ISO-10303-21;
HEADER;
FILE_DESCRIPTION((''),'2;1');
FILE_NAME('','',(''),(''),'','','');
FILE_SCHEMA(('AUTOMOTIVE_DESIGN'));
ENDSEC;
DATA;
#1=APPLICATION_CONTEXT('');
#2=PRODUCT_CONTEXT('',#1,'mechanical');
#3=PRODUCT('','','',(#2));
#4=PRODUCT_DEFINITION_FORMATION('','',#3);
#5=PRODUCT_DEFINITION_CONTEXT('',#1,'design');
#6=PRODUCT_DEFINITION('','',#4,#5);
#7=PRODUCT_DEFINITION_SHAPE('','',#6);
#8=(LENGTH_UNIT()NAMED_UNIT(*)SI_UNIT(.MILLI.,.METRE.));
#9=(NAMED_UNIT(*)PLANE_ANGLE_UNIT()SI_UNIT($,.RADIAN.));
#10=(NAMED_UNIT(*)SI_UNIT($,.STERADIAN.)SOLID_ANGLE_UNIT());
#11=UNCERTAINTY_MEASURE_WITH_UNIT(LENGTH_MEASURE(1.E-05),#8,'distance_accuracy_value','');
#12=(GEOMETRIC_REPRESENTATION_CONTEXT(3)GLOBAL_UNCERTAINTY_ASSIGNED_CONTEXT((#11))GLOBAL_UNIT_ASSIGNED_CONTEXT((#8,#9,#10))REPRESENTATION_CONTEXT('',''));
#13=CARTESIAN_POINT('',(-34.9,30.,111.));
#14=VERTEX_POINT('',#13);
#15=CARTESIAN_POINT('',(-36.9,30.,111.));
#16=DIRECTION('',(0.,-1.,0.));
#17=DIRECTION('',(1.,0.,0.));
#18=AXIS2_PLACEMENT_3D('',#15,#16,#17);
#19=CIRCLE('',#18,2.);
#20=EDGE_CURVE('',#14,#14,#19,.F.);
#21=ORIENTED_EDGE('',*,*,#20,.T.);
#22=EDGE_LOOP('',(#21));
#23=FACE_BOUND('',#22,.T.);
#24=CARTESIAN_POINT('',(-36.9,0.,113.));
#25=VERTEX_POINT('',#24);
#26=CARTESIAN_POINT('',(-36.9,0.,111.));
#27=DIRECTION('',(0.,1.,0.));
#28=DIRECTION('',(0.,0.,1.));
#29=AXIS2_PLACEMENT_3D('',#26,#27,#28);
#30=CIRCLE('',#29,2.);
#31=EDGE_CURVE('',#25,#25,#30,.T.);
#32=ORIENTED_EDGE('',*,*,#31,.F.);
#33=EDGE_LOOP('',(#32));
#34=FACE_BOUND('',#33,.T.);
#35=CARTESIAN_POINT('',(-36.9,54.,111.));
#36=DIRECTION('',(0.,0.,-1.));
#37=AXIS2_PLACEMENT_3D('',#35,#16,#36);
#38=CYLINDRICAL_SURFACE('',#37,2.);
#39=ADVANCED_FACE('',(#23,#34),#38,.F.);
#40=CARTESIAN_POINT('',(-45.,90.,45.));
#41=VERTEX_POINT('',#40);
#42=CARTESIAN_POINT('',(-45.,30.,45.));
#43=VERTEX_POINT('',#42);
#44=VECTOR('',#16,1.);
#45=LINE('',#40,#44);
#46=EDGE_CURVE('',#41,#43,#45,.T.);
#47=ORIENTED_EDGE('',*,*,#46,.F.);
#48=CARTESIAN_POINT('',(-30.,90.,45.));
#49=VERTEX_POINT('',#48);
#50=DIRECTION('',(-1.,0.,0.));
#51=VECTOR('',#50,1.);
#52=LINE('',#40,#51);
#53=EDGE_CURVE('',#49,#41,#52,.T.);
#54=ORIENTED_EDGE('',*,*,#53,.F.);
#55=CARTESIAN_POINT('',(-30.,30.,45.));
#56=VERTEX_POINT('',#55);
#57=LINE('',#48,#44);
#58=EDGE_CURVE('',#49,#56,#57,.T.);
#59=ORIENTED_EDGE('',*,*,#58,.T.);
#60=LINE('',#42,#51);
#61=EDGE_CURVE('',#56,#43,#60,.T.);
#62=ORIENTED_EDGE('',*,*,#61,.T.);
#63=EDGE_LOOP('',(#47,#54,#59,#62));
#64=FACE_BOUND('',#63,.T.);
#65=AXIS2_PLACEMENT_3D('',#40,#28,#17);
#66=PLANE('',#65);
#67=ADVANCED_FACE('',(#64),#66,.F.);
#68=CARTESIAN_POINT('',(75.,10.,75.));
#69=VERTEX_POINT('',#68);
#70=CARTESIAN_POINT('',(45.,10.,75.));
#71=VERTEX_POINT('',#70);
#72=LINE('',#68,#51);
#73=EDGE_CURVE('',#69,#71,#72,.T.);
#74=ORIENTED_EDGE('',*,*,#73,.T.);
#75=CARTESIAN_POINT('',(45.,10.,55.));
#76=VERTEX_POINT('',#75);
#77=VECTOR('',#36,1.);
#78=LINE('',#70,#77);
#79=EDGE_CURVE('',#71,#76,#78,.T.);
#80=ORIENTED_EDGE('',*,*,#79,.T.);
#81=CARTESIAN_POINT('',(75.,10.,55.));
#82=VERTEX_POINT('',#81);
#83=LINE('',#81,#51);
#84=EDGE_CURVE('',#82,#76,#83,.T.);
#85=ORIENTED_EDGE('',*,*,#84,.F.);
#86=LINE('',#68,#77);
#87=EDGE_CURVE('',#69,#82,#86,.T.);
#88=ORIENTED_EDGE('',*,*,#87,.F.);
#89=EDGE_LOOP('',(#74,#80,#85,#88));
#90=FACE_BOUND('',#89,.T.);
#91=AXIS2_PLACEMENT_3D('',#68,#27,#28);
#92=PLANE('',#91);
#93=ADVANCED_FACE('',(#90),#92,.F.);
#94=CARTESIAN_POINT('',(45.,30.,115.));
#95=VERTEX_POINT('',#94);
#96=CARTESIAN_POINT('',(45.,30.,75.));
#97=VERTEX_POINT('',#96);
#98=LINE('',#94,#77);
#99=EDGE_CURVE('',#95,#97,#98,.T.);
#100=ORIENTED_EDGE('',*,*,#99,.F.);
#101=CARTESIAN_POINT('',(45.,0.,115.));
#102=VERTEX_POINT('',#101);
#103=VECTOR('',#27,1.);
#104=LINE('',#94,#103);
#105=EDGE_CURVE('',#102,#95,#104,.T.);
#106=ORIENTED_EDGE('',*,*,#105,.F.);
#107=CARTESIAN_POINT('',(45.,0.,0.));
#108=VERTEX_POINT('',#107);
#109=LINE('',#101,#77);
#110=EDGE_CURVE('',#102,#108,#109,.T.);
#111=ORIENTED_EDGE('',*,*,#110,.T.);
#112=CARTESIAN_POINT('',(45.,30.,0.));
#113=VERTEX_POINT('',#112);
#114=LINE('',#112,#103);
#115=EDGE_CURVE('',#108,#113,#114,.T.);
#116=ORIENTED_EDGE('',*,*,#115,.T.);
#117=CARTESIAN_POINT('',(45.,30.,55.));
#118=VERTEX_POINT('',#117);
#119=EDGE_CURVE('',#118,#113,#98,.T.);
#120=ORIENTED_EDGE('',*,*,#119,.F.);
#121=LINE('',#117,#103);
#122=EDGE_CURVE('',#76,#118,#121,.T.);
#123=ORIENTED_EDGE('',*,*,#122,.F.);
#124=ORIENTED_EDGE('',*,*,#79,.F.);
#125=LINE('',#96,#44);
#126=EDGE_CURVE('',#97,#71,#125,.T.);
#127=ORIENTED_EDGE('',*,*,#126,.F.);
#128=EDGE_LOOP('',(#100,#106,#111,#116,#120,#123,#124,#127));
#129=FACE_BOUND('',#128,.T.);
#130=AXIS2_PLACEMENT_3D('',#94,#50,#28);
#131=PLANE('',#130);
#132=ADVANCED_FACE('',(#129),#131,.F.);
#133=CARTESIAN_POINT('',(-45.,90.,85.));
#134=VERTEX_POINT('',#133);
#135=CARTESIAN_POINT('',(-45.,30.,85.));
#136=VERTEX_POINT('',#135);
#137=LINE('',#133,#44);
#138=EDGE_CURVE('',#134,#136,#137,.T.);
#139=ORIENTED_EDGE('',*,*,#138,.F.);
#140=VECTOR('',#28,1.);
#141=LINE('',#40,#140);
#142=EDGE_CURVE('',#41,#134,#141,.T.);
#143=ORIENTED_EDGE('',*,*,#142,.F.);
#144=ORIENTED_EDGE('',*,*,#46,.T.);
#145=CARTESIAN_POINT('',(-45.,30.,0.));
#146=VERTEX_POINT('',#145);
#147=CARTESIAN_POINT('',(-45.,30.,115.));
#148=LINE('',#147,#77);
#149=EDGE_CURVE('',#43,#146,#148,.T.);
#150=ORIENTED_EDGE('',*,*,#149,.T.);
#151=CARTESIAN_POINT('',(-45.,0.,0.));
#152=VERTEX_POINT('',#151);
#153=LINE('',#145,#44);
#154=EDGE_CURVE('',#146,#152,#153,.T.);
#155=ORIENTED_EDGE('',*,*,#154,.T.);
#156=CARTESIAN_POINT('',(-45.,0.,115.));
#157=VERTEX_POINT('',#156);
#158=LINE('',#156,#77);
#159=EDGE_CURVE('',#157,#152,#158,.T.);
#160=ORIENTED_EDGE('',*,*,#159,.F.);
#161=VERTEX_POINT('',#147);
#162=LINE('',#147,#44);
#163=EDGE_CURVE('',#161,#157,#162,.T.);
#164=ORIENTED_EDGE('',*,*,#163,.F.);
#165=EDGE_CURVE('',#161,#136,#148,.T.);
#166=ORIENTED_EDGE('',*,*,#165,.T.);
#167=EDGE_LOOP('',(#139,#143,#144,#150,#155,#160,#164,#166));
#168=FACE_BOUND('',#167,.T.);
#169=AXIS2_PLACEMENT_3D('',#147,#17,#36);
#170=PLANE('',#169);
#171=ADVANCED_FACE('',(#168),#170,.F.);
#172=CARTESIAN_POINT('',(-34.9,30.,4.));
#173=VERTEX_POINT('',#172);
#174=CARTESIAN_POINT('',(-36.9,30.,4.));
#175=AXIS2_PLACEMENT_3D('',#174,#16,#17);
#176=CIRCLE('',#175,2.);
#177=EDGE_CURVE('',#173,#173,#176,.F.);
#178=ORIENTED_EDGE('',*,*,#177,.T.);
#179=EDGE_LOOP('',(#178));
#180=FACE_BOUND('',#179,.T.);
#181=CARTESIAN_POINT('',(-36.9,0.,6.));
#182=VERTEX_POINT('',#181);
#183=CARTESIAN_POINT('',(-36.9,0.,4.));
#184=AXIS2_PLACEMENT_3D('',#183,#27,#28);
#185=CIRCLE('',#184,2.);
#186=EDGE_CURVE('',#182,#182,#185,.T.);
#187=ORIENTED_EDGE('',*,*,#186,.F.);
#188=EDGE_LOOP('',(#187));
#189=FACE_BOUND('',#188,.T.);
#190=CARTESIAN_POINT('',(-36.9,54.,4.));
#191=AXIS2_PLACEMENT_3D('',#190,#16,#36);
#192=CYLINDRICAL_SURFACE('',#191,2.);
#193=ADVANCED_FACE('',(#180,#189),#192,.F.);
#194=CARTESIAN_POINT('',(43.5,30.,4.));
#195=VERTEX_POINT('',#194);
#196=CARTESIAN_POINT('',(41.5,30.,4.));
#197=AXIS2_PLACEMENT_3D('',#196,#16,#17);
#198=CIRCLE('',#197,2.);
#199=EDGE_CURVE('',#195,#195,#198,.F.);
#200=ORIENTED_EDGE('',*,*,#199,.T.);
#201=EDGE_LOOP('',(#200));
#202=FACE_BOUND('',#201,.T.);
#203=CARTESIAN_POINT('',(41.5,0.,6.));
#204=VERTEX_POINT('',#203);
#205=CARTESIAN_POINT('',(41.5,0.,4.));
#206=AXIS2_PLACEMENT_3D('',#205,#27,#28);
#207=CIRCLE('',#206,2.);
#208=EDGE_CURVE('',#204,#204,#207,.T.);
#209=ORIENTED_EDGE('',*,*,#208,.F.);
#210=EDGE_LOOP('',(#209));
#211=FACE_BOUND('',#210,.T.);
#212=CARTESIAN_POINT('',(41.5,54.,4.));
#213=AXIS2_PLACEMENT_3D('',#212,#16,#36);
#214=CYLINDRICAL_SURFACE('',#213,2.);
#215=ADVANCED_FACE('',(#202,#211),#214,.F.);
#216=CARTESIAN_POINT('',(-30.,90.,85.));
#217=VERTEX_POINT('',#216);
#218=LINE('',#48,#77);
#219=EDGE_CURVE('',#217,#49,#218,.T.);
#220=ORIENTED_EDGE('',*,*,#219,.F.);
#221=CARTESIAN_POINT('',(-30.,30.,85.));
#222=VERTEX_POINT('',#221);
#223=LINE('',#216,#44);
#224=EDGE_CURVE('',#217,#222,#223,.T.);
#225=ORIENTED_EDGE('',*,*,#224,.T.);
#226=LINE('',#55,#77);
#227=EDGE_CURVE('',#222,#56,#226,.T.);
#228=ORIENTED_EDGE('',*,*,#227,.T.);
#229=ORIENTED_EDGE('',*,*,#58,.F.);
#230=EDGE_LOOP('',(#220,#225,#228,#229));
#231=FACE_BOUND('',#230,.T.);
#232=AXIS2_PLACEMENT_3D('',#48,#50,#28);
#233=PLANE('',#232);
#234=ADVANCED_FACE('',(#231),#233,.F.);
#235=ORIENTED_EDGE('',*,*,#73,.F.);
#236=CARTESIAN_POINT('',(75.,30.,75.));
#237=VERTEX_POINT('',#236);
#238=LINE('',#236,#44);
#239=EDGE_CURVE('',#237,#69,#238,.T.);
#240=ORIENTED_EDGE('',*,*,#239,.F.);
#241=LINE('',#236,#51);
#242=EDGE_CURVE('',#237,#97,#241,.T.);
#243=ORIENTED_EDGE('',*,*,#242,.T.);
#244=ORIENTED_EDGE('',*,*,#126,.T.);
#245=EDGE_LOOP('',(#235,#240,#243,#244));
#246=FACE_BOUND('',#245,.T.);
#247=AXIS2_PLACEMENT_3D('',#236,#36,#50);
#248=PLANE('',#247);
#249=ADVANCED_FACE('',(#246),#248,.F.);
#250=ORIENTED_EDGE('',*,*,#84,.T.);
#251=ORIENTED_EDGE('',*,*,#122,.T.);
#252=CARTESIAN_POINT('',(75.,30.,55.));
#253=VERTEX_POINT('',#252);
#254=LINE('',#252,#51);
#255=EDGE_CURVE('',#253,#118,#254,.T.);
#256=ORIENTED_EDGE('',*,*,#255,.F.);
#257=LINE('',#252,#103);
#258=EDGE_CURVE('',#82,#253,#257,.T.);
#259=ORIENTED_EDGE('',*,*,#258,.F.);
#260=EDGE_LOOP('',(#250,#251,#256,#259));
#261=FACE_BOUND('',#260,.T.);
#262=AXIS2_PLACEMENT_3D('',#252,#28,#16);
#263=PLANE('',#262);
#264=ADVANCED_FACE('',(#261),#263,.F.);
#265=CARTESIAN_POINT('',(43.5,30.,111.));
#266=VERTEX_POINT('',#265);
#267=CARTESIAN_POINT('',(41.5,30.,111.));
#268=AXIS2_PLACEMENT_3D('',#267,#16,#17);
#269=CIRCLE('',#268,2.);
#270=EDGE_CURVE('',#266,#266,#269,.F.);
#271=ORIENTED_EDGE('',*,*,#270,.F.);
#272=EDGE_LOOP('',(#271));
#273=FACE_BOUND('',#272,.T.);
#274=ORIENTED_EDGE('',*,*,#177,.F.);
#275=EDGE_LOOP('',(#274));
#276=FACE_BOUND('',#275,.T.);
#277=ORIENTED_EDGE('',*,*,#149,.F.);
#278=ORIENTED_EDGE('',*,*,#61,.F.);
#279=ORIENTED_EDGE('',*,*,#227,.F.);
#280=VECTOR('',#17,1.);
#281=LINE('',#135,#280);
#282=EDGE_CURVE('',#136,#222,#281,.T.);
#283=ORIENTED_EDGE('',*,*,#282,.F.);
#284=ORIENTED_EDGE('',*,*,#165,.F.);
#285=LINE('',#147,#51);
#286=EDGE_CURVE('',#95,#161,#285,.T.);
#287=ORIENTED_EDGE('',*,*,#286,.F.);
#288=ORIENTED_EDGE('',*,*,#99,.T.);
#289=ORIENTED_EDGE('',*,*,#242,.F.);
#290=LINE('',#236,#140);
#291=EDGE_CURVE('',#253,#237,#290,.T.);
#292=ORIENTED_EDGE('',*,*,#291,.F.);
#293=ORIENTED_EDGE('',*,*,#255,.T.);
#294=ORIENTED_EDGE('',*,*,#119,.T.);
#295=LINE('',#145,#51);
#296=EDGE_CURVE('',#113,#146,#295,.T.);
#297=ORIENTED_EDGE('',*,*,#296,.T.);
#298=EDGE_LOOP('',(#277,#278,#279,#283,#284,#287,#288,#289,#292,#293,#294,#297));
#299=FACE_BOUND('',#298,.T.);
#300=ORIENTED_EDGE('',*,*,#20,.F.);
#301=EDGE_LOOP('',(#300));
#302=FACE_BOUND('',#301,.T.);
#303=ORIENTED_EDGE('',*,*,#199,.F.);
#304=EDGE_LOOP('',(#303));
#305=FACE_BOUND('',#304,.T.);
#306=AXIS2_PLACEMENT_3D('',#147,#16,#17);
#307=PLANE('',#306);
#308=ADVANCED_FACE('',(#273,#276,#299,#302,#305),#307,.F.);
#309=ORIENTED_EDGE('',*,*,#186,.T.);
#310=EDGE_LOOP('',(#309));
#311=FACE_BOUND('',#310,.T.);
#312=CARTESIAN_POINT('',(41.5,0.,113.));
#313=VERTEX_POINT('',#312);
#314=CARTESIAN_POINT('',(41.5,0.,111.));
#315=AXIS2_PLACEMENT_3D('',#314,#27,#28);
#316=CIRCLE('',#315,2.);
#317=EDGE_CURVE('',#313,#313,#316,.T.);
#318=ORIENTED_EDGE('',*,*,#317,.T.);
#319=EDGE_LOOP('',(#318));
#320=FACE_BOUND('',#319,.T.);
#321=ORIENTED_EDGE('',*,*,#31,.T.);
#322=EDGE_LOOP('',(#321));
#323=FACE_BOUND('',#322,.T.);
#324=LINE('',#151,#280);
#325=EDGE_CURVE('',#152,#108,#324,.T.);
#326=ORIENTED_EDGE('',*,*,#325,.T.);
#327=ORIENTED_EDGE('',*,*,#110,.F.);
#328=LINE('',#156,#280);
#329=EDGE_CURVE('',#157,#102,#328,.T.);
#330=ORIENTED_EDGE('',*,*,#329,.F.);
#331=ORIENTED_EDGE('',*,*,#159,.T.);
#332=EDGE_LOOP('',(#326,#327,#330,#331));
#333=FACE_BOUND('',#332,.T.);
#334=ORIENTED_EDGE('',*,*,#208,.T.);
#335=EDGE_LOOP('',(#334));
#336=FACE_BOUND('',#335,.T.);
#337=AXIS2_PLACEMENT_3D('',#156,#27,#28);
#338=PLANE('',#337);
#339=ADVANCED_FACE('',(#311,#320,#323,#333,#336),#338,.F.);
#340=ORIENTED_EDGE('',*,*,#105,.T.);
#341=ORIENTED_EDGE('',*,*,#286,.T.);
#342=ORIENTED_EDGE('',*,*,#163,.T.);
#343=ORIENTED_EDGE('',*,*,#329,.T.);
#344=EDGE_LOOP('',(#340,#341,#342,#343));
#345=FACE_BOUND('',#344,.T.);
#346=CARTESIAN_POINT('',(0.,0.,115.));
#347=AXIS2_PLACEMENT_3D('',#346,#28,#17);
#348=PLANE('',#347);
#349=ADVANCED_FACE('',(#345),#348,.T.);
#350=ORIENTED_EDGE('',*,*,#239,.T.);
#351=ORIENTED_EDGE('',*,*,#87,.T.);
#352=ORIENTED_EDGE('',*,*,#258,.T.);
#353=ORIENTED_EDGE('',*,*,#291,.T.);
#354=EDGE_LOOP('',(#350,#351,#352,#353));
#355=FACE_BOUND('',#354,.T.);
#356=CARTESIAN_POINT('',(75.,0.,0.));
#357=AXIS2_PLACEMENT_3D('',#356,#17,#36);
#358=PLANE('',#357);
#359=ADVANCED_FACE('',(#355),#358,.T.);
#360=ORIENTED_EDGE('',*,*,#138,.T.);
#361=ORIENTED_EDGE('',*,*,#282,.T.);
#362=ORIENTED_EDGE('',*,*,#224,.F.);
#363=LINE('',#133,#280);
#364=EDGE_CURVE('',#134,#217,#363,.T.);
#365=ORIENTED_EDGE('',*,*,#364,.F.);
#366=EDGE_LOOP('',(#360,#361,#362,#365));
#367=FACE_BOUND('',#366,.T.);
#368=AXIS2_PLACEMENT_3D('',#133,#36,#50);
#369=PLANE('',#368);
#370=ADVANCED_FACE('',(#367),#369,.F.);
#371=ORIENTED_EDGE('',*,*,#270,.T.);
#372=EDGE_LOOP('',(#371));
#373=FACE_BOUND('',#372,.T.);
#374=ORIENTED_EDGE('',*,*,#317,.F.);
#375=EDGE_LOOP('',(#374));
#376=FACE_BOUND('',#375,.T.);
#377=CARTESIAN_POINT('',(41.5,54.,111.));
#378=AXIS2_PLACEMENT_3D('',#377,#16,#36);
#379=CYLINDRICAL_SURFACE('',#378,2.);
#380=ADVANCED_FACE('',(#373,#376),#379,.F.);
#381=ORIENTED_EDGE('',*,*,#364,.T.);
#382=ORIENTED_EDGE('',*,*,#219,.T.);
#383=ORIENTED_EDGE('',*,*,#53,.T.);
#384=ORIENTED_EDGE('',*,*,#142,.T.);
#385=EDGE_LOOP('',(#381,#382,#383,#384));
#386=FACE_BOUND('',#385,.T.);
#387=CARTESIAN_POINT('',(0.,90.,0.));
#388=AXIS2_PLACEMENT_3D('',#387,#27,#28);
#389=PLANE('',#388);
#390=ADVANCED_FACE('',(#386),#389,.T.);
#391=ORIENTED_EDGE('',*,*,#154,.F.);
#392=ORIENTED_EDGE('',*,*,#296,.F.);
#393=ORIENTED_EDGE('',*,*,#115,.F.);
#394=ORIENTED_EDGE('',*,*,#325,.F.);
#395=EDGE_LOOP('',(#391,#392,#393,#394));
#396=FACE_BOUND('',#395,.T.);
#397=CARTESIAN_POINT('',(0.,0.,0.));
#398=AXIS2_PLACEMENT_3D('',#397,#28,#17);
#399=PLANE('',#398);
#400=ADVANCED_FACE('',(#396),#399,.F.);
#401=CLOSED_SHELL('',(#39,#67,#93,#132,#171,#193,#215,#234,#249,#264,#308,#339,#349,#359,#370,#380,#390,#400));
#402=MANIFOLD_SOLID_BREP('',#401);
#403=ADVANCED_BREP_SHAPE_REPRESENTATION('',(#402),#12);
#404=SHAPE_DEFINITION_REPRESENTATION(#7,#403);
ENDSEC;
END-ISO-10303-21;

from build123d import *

# Parameters (mm, degrees)
SKETCH_1_W              = 90
SKETCH_1_H              = 30
EXTRUDE_1_DEPTH         = 115
SKETCH_3_W              = 20
SKETCH_3_H              = 20
EXTRUDE_2_DEPTH         = 30
SKETCH_4_W              = 15
SKETCH_4_H              = 40
EXTRUDE_3_DEPTH         = 60
CUT_EXTRUDE_1_OUTLINE_R = 2
CUT_EXTRUDE_1_DEPTH     = 30


# Read off the part's stored shape, not the designer's step: 切除-拉伸1
with BuildPart() as part:
    # 草图1 → 凸台-拉伸1 (new body)
    with BuildSketch(Plane.XY):
        with Locations((0, 15)):
            Rectangle(SKETCH_1_W, SKETCH_1_H)
    extrude(amount=EXTRUDE_1_DEPTH)

    # 草图3 → 凸台-拉伸2 (add)
    with BuildSketch(Plane(origin=(45, 0, 0), x_dir=(0, 0, -1), z_dir=(1, 0, 0))):
        with Locations((-65, 20)):
            Rectangle(SKETCH_3_W, SKETCH_3_H)
    extrude(amount=EXTRUDE_2_DEPTH)

    # 草图4 → 凸台-拉伸3 (add)
    with BuildSketch(Plane(origin=(0, 30, 0), x_dir=(1, 0, 0), z_dir=(0, 1, 0))):
        with Locations((-37.5, -65)):
            Rectangle(SKETCH_4_W, SKETCH_4_H)
    extrude(amount=EXTRUDE_3_DEPTH)

    # 切除-拉伸1 outline → 切除-拉伸1 (cut)
    with BuildSketch(Plane(origin=(0, 0, 0), x_dir=(1, 0, 0), z_dir=(0, 1, 0))):
        with Locations((41.5, -4)):
            Circle(CUT_EXTRUDE_1_OUTLINE_R)
        with Locations((-36.9, -4)):
            Circle(CUT_EXTRUDE_1_OUTLINE_R)
        with Locations((-36.9, -111)):
            Circle(CUT_EXTRUDE_1_OUTLINE_R)
        with Locations((41.5, -111)):
            Circle(CUT_EXTRUDE_1_OUTLINE_R)
    extrude(amount=CUT_EXTRUDE_1_DEPTH, mode=Mode.SUBTRACT)


solid = part.part
